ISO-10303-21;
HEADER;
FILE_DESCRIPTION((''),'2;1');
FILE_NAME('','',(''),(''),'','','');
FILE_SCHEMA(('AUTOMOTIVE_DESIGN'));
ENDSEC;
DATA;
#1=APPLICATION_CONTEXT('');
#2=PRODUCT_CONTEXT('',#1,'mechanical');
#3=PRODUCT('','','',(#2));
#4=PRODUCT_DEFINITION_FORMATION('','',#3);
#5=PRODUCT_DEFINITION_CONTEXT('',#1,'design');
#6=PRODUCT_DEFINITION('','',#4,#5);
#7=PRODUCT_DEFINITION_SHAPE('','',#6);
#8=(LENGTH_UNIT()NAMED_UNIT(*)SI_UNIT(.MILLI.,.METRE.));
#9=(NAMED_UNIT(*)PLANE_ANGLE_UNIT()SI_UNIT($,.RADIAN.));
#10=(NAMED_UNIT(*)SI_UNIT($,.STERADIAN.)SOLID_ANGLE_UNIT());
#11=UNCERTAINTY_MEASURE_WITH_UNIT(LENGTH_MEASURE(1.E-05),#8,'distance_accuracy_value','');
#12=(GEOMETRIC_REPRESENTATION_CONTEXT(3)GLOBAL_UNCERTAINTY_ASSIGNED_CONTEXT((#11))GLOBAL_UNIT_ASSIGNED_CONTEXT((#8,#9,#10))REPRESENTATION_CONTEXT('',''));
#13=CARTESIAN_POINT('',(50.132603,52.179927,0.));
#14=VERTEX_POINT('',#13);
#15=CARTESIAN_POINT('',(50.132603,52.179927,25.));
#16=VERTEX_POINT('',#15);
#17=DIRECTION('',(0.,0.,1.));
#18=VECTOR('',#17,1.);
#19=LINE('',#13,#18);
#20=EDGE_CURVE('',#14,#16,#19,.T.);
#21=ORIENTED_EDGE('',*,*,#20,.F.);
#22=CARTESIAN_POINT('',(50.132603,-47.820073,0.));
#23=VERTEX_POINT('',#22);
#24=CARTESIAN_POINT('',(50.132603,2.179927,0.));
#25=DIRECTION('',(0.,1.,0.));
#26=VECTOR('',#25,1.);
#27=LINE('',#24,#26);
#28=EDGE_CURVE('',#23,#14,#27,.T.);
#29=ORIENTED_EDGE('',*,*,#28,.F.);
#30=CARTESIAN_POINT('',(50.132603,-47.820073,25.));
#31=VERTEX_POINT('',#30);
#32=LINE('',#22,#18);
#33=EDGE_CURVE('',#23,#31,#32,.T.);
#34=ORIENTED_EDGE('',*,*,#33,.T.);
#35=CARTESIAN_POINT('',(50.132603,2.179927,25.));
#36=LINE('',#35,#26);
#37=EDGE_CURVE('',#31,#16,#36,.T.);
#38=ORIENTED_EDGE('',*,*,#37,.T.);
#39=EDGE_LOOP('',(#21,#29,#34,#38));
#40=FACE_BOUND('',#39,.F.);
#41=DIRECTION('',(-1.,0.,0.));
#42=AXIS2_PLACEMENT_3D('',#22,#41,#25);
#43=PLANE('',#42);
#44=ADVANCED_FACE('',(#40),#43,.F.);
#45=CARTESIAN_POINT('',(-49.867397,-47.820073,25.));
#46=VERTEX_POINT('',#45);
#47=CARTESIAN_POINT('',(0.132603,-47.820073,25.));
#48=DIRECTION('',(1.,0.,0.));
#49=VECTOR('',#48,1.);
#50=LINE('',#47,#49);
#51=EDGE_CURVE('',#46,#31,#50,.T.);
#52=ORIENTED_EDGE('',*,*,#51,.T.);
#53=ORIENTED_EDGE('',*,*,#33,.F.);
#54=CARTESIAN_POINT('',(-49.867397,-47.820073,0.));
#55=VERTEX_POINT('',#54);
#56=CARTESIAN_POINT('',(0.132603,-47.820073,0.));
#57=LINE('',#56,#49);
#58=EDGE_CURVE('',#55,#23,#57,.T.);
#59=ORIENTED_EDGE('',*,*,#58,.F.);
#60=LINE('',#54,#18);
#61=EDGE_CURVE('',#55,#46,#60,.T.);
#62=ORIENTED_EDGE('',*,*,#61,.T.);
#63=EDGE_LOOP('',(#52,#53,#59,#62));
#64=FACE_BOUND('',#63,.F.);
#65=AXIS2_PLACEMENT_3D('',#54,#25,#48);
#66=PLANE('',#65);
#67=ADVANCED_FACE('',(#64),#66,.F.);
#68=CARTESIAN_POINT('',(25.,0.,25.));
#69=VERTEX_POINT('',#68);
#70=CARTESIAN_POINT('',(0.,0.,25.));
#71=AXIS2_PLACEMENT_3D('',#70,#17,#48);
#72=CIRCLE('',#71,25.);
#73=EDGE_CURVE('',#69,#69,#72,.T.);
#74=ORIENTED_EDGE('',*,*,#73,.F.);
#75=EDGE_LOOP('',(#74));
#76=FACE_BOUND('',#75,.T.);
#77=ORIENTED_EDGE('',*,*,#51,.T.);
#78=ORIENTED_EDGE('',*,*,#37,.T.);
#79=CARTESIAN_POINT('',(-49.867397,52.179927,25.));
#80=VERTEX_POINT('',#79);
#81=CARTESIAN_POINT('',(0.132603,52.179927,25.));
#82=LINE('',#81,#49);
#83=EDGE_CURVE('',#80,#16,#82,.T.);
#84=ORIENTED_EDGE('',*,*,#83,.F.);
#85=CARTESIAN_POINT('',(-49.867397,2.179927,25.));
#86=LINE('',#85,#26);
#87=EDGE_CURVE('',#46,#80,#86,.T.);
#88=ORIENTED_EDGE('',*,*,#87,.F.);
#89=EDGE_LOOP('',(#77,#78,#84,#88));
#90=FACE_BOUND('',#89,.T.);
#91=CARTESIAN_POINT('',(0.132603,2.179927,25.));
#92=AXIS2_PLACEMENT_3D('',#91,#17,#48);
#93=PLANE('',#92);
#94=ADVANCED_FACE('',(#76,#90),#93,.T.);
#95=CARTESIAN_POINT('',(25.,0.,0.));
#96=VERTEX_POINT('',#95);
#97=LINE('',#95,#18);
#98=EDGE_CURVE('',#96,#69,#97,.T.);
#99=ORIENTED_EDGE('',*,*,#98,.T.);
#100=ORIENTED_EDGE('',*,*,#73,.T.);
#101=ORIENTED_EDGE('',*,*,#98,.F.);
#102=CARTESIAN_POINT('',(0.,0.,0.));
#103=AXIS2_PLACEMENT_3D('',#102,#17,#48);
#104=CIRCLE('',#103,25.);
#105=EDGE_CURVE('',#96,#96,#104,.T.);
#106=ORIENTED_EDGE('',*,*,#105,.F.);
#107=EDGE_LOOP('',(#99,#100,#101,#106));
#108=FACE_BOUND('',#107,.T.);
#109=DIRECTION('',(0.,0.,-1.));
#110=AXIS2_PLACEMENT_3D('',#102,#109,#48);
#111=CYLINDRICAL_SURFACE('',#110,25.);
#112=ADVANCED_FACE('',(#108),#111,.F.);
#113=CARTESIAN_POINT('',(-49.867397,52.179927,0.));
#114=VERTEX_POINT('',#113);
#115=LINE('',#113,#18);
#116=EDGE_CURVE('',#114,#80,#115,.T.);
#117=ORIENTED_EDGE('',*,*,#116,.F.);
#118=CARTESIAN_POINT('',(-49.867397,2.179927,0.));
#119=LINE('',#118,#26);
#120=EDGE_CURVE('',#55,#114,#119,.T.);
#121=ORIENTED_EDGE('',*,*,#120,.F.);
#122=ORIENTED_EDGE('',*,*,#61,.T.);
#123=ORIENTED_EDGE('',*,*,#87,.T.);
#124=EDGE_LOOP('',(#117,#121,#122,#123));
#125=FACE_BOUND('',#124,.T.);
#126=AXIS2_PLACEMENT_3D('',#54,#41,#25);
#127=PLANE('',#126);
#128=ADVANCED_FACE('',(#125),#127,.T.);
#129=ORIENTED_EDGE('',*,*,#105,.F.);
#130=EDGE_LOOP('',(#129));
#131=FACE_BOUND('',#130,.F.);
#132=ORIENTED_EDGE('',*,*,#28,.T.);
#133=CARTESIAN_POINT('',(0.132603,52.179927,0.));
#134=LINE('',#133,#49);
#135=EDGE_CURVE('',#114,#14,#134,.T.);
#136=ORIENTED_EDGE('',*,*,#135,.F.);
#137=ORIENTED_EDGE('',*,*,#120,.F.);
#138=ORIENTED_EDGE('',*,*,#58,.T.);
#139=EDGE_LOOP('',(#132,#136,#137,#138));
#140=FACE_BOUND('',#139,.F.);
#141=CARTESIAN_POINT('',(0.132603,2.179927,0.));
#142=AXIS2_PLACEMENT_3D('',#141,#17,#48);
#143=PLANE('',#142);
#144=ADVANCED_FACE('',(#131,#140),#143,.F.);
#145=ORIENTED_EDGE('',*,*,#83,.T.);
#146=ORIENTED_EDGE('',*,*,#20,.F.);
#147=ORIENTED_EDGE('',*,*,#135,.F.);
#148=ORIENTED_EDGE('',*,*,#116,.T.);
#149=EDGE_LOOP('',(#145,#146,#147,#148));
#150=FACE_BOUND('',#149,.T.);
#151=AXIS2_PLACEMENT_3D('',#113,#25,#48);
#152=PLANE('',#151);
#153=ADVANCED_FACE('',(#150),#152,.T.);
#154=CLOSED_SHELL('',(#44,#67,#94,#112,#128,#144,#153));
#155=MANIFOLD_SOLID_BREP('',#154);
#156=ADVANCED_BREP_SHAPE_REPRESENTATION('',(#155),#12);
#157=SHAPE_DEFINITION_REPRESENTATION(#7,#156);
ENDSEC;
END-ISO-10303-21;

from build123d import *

# Parameters (mm, degrees)
F0_W     = 100
F0_H     = 100
F0_R     = 25
F1_DEPTH = 25


# Not quite as in the source:
# - the program builds the solid bodies; features that only make, move or delete a surface that nothing else refers to are left out


with BuildPart() as f1:
    # F0 (on Top) → F1 (new body)
    with BuildSketch(Plane.XY):
        with Locations((0.1326033846, 2.1799273789)):
            Rectangle(F0_W, F0_H)
        Circle(F0_R, mode=Mode.SUBTRACT)
    extrude(amount=F1_DEPTH)


solid = f1.part
